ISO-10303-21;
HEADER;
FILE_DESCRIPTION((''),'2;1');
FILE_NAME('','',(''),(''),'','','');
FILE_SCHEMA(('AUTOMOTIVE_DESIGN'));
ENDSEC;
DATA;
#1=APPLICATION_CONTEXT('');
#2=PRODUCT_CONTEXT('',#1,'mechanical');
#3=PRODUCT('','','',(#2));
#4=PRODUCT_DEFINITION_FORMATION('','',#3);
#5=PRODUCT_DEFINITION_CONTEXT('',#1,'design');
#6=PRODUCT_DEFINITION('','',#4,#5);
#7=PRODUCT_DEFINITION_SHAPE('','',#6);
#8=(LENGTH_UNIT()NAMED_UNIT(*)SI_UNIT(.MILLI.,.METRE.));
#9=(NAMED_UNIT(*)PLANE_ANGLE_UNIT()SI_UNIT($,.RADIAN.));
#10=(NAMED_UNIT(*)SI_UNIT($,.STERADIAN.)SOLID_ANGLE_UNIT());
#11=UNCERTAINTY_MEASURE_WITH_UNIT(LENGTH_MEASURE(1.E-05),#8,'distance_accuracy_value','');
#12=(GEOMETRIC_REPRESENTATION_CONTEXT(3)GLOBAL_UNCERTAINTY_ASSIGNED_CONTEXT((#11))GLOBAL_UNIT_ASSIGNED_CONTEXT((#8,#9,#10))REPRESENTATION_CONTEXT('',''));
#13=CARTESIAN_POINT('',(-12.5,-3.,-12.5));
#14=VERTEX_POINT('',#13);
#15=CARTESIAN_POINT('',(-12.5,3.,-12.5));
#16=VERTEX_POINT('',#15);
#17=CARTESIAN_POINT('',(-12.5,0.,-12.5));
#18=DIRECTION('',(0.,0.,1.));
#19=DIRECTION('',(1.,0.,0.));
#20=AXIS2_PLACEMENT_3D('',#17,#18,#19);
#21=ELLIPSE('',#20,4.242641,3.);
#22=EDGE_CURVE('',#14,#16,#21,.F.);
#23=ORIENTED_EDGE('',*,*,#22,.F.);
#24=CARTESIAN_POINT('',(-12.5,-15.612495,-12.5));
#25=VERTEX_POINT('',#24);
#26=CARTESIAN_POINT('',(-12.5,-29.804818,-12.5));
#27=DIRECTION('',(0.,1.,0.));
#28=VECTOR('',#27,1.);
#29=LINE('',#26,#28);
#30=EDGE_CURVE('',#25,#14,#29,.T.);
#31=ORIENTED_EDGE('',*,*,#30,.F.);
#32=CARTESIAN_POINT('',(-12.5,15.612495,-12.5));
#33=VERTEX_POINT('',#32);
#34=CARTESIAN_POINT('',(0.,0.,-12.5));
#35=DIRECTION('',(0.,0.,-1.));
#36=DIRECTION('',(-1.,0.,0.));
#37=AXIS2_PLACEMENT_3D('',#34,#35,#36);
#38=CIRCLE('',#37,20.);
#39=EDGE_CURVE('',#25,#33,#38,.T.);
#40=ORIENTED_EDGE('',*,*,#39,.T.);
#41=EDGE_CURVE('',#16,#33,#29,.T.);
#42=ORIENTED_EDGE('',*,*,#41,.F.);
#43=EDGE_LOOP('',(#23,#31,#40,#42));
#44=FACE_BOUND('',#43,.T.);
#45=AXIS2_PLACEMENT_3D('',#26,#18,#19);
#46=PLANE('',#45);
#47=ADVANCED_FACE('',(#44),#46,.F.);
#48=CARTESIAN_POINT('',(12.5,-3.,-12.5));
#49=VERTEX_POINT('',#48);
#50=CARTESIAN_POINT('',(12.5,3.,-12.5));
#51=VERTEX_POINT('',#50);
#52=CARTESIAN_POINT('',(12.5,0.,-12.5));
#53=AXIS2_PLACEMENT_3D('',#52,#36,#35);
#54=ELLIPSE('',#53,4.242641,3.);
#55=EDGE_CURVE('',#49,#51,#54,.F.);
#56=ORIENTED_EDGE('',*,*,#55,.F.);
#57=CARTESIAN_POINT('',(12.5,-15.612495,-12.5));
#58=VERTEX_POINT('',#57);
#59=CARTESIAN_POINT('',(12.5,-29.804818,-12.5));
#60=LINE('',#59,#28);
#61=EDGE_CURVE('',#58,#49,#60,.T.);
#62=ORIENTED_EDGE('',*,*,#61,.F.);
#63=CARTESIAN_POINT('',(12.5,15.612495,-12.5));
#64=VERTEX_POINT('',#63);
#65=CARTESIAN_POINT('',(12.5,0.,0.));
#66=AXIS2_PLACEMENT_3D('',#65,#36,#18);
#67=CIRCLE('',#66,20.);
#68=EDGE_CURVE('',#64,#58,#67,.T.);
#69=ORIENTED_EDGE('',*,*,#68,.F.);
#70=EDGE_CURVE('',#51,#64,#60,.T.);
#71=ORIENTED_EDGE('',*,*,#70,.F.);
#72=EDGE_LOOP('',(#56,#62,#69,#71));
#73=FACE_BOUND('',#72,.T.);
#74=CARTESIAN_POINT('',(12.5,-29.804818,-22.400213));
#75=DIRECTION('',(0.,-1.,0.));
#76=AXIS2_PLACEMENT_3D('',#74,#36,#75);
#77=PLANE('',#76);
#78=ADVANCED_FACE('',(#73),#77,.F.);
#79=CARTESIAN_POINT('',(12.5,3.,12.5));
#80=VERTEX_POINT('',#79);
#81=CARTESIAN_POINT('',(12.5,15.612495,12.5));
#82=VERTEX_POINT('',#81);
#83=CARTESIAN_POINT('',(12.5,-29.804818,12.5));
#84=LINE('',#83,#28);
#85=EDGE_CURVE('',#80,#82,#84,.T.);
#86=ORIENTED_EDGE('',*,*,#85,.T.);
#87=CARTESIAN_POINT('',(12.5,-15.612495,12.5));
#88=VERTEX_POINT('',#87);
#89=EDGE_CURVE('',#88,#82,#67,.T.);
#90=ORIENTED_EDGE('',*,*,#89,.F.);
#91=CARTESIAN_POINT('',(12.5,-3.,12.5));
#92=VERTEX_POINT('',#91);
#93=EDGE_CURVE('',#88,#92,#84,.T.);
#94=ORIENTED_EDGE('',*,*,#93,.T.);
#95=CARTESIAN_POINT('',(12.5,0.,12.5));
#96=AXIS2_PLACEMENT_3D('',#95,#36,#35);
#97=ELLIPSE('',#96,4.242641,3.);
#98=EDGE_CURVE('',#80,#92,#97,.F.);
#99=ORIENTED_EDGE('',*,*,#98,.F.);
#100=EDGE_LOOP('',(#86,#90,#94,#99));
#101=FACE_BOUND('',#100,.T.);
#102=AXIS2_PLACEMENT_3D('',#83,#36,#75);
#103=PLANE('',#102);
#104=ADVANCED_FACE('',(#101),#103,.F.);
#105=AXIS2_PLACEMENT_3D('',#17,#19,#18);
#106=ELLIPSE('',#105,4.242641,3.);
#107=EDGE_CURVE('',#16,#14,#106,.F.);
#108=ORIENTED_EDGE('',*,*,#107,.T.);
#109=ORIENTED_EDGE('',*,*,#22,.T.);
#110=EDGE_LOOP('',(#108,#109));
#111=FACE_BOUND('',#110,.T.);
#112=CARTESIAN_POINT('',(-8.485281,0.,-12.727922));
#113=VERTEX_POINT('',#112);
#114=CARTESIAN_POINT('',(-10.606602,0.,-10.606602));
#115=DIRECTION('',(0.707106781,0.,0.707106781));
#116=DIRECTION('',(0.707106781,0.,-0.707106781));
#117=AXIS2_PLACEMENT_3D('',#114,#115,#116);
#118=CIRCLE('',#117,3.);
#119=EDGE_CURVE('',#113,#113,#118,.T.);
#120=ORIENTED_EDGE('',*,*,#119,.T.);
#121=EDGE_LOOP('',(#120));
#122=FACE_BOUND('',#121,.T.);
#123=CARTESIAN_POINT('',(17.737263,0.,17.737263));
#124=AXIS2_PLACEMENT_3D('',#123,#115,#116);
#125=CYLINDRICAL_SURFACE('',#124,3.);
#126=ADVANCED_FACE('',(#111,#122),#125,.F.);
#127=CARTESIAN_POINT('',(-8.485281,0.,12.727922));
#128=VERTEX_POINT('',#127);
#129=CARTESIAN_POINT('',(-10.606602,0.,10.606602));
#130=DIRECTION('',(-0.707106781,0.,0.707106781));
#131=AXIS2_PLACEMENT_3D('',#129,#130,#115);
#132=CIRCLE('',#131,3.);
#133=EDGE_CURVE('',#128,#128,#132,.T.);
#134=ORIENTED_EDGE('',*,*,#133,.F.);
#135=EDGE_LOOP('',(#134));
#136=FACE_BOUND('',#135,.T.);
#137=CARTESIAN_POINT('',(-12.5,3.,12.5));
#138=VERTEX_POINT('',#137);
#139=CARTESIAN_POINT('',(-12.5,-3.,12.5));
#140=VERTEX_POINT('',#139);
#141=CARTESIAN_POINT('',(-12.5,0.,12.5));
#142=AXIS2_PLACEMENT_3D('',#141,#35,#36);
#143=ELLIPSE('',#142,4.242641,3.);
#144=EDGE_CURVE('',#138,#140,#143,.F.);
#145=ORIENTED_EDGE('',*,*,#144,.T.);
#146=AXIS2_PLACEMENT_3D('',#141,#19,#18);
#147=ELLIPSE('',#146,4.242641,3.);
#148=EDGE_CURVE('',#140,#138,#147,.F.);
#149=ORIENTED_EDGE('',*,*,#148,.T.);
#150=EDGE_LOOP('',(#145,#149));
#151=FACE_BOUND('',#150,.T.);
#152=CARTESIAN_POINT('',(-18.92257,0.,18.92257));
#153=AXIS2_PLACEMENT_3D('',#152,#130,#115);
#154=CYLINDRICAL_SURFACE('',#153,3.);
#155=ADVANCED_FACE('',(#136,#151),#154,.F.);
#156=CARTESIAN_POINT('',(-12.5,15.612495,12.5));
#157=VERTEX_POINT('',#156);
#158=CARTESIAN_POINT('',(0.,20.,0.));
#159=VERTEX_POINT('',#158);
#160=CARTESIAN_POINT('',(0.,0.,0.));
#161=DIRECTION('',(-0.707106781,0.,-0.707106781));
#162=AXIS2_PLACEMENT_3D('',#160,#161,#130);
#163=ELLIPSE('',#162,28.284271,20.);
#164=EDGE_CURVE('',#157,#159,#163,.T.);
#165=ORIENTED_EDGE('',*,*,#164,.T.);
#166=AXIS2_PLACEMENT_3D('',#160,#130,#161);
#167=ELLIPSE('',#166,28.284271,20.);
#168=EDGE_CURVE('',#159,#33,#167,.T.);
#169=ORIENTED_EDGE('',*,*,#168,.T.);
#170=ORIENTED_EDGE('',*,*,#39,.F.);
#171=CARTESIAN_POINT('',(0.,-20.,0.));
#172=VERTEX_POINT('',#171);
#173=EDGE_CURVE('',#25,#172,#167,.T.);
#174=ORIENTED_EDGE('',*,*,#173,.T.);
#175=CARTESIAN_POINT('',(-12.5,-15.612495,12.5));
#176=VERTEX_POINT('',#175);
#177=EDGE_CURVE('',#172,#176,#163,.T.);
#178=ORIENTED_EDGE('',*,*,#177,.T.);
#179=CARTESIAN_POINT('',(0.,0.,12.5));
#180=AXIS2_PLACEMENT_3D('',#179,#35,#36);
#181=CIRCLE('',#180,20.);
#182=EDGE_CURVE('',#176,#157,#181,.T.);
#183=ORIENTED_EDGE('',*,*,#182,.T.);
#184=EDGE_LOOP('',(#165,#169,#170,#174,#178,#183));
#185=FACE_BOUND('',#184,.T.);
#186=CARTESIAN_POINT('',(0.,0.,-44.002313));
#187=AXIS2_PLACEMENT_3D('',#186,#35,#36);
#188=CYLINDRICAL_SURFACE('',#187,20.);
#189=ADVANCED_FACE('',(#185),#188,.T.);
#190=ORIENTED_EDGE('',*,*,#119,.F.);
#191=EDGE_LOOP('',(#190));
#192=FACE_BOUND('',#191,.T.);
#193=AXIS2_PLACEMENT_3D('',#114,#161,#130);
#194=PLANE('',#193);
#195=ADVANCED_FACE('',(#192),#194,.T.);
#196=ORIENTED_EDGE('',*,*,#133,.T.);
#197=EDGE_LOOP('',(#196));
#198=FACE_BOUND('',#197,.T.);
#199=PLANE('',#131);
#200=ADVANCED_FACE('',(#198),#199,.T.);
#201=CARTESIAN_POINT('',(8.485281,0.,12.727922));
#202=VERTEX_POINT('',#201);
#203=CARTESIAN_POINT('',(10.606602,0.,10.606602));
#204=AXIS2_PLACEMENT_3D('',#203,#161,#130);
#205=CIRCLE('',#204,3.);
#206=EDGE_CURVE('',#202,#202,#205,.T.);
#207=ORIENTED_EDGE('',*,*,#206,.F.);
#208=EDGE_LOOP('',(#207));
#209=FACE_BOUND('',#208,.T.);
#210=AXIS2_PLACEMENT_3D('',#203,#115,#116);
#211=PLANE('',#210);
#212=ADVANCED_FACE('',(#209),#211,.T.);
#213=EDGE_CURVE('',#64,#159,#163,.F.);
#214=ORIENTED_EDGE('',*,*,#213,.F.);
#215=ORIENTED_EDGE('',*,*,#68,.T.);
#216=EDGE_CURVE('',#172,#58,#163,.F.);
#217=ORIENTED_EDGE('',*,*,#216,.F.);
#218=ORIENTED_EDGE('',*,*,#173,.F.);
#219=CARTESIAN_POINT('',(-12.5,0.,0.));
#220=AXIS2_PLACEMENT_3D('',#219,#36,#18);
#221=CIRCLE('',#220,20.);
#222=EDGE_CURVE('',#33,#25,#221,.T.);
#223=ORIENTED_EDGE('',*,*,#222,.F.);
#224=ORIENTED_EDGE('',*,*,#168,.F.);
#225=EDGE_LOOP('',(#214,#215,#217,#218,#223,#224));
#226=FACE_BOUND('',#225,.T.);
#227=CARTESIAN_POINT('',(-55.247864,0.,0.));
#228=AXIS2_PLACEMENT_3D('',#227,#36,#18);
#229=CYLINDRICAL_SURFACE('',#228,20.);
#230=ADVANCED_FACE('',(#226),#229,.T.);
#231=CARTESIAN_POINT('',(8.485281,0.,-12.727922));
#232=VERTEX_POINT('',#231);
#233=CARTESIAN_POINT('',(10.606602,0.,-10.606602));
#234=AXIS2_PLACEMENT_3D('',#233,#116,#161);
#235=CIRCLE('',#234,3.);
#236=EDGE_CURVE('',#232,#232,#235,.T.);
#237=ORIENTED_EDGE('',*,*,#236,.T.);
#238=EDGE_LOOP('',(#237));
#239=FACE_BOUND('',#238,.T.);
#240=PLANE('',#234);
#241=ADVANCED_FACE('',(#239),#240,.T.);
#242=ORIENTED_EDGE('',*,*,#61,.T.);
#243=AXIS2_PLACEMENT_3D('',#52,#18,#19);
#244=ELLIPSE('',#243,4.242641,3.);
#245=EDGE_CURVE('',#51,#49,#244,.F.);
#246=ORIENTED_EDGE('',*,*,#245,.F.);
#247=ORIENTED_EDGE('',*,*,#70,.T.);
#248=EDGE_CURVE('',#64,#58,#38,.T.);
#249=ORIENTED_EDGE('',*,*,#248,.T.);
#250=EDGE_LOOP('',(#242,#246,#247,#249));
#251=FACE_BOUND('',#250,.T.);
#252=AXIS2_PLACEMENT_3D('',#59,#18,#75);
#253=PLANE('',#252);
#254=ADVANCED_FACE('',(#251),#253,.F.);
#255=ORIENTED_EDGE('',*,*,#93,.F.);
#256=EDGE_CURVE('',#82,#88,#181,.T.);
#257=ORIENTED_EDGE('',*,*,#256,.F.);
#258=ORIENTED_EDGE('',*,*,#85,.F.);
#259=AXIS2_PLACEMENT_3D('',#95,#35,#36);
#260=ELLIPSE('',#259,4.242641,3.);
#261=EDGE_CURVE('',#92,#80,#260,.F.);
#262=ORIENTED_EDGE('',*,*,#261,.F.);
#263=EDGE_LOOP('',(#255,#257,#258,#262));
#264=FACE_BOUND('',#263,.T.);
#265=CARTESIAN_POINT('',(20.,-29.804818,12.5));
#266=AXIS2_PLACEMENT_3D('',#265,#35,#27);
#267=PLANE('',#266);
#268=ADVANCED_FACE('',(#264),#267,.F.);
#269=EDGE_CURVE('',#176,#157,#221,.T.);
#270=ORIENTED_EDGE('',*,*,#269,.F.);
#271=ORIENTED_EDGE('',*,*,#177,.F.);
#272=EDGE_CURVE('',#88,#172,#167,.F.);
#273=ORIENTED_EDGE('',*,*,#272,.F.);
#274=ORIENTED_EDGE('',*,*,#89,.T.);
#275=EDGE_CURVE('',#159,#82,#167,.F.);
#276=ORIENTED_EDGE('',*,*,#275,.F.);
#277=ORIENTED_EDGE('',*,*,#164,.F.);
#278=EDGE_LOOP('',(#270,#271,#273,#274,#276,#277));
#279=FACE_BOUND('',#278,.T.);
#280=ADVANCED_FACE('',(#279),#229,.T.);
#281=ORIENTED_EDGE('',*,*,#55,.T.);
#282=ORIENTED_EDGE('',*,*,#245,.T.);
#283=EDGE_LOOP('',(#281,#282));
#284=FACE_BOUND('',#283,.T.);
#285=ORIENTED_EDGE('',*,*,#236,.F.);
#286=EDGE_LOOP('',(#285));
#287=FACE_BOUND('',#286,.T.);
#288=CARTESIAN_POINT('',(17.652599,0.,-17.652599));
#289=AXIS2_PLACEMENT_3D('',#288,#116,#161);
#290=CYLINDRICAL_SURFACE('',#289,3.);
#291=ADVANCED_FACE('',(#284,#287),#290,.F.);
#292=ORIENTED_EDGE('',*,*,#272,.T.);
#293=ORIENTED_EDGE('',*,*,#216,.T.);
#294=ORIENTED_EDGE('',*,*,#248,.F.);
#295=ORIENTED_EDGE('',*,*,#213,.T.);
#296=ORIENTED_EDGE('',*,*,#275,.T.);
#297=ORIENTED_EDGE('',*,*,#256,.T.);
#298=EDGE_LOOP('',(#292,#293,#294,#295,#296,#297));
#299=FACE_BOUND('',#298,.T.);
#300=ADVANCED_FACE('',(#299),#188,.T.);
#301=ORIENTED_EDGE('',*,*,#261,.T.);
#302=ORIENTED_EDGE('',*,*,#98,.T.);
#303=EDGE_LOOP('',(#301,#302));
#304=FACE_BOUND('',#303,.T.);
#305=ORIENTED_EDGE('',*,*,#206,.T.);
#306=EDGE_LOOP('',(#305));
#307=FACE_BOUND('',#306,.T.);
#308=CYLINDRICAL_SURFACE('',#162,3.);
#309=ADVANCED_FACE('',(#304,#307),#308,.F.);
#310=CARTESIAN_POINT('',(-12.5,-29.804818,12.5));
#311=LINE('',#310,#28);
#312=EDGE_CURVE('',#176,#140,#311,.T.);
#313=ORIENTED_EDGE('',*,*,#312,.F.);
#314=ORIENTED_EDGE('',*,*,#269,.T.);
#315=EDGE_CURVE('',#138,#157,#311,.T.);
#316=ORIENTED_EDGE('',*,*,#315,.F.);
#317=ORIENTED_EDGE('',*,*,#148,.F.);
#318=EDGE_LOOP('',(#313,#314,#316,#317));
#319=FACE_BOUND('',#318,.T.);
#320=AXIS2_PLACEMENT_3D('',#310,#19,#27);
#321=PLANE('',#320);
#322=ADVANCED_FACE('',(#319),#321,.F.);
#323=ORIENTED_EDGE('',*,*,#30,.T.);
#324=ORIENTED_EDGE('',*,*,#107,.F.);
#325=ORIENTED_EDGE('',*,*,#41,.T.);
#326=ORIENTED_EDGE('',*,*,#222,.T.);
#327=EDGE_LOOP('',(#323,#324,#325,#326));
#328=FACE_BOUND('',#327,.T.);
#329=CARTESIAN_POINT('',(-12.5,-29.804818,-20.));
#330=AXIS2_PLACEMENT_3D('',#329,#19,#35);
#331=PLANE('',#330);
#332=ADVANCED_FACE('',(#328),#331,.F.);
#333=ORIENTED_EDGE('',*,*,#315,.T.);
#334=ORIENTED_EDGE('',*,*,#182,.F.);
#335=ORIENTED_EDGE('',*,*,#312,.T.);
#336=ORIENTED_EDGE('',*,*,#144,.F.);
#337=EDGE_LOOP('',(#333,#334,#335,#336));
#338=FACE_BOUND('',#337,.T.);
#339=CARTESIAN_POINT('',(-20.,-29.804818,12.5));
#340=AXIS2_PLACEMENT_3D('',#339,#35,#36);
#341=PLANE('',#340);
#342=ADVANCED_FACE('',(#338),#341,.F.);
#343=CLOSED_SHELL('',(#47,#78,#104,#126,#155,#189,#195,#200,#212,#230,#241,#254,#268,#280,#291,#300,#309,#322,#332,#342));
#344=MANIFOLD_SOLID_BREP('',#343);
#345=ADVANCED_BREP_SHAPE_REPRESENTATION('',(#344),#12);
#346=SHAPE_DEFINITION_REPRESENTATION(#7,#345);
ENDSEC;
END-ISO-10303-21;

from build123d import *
from OCP.BRepAlgoAPI import BRepAlgoAPI_Cut
from OCP.TopTools import TopTools_ListOfShape

# Parameters (mm, degrees)
CUT_EXTRUDE_2_DEPTH      = 59.108987417
CUT_EXTRUDE_2_DEPTH_BACK = 59.108987417
SKETCH_6_W               = 109.700764472
SKETCH_6_H               = 102.082655829
SKETCH_6_W_2             = 40
SKETCH_6_H_2             = 40
SKETCH_7_W               = 10.430230832
SKETCH_7_H               = 9.900213331
CUT_EXTRUDE_3_DEPTH      = 66.9796091
SKETCH_8_W               = 20.261670598
SKETCH_8_H               = 3
SKETCH_9_W               = 20.800473715
SKETCH_9_H               = 3
SKETCH_11_W              = 20.381404624
SKETCH_11_H              = 3
SKETCH_12_W              = 21.399143843
SKETCH_12_H              = 3


with BuildPart() as part:
    # 草图3 → 旋转1 (revolve)
    with BuildSketch(Plane(origin=(0, 0, 0), x_dir=(0, 0, -1), z_dir=(1, 0, 0))):
        with BuildLine():
            Line((0, 40), (0, -40))
            ThreePointArc((0, -40), (40, 0), (0, 40))
        make_face()
    revolve(axis=Axis((0, 40, 0), (0, -1, 0)))

    # 草图4 → 切除-旋转3 (revolve, cut)
    with BuildSketch(Plane.XY):
        Polygon((-25, 50), (25, 50), (12.5, 20), (-12.5, 20), align=None)
    revolve(axis=Axis((-55.247864245, 0, 0), (1, 0, 0)), mode=Mode.SUBTRACT)


with BuildPart() as cut_revolve_4_tool:
    # 草图5 → 切除-旋转4 (revolve)
    with BuildSketch(Plane(origin=(0, 0, 0), x_dir=(1, 0, 0), z_dir=(0, 1, 0))):
        Polygon((-50, 25), (-50, -25), (-20, -12.5), (-20, 12.5), align=None)
    revolve(axis=Axis((0, 0, -44.002313129), (0, 0, 1)))


with BuildPart() as part_1:
    add(part.part)

    # 切除-旋转4: cut by cut_revolve_4_tool, with a tolerance
    cut_revolve_4_stock = TopTools_ListOfShape()
    cut_revolve_4_stock.Append(part_1.part.wrapped)
    cut_revolve_4_tools = TopTools_ListOfShape()
    cut_revolve_4_tools.Append(cut_revolve_4_tool.part.wrapped)
    cut_revolve_4_cut = BRepAlgoAPI_Cut()
    cut_revolve_4_cut.SetArguments(cut_revolve_4_stock)
    cut_revolve_4_cut.SetTools(cut_revolve_4_tools)
    cut_revolve_4_cut.SetFuzzyValue(0.00001)
    cut_revolve_4_cut.Build()
    add(Compound.cast(cut_revolve_4_cut.Shape()).solids(), mode=Mode.REPLACE)

    # 草图6 → 切除-拉伸2 (cut, two sides: drawn at the far end of the back side and taken through both)
    with BuildSketch(Plane(origin=(0, 0, 0), x_dir=(1, 0, 0), z_dir=(0, 1, 0)).offset(-CUT_EXTRUDE_2_DEPTH_BACK)):
        with Locations((-5.024851986, -5.217653308)):
            Rectangle(SKETCH_6_W, SKETCH_6_H)
        Rectangle(SKETCH_6_W_2, SKETCH_6_H_2, mode=Mode.SUBTRACT)
    extrude(amount=CUT_EXTRUDE_2_DEPTH + CUT_EXTRUDE_2_DEPTH_BACK, mode=Mode.SUBTRACT)

    # 草图7 → 切除-拉伸3 (cut, through all)
    with BuildSketch(Plane(origin=(0, 29.80481839, 0), x_dir=(1, 0, 0), z_dir=(0, 1, 0))):
        Polygon((-12.5, 20), (-12.5, 12.5), (-20, 12.5), (-20, 22.400213331), (-12.5, 22.400213331), align=None)
        with Locations((17.715115416, 17.450106666)):
            Rectangle(SKETCH_7_W, SKETCH_7_H)
        Polygon((-12.5, -12.5), (-12.5, -22.2886307), (-23.264978728, -21.674926225), (-21.87019583, -13.864142), (-20, -12.5), align=None)
        Polygon((12.5, -12.5), (12.5, -20), (16.291064241, -21.981778462), (20, -20), (23.264978728, -15.681813192), (21.632489364, -12.626578567), (20, -12.5), align=None)
    extrude(amount=-CUT_EXTRUDE_3_DEPTH, mode=Mode.SUBTRACT)

    # 草图8 → 切除-旋转5 (revolve, cut)
    with BuildSketch(Plane(origin=(0, 0, 0), x_dir=(-0.7071067811865477, 0, -0.7071067811865475), z_dir=(0.7071067811865475, 0, -0.7071067811865477))):
        with Locations((25.130835299, 1.5)):
            Rectangle(SKETCH_8_W, SKETCH_8_H)
    revolve(axis=Axis((17.737263362, 0, 17.737263362), (-0.7071067811865476, 0, -0.7071067811865475)), mode=Mode.SUBTRACT)

    # 草图9 → 切除-旋转6 (revolve, cut)
    with BuildSketch(Plane(origin=(0, 0, 0), x_dir=(-0.7071067811865477, 0, 0.7071067811865475), z_dir=(-0.7071067811865475, 0, -0.7071067811865477))):
        with Locations((-25.400236858, 1.5)):
            Rectangle(SKETCH_9_W, SKETCH_9_H)
    revolve(axis=Axis((17.65259862, 0, -17.65259862), (-0.7071067811865477, 0, 0.7071067811865475)), mode=Mode.SUBTRACT)

    # 草图11 → 切除-旋转10 (revolve, cut)
    with BuildSketch(Plane(origin=(0, 0, 0), x_dir=(0.7071067811865476, 0, -0.7071067811865475), z_dir=(0.7071067811865475, 0, 0.7071067811865476))):
        with Locations((-25.190702312, 1.5)):
            Rectangle(SKETCH_11_W, SKETCH_11_H)
    revolve(axis=Axis((-18.922569744, 0, 18.922569744), (0.7071067811865476, 0, -0.7071067811865475)), mode=Mode.SUBTRACT)

    # 草图12 → 切除-旋转11 (revolve, cut)
    with BuildSketch(Plane(origin=(0, 0, 0), x_dir=(0.7071067811865477, 0, 0.7071067811865475), z_dir=(-0.7071067811865475, 0, 0.7071067811865477))):
        with Locations((25.699571922, 1.5)):
            Rectangle(SKETCH_12_W, SKETCH_12_H)
    revolve(axis=Axis((0, 0, 0), (0.7071067811865477, 0, 0.7071067811865475)), mode=Mode.SUBTRACT)


solid = part_1.part
